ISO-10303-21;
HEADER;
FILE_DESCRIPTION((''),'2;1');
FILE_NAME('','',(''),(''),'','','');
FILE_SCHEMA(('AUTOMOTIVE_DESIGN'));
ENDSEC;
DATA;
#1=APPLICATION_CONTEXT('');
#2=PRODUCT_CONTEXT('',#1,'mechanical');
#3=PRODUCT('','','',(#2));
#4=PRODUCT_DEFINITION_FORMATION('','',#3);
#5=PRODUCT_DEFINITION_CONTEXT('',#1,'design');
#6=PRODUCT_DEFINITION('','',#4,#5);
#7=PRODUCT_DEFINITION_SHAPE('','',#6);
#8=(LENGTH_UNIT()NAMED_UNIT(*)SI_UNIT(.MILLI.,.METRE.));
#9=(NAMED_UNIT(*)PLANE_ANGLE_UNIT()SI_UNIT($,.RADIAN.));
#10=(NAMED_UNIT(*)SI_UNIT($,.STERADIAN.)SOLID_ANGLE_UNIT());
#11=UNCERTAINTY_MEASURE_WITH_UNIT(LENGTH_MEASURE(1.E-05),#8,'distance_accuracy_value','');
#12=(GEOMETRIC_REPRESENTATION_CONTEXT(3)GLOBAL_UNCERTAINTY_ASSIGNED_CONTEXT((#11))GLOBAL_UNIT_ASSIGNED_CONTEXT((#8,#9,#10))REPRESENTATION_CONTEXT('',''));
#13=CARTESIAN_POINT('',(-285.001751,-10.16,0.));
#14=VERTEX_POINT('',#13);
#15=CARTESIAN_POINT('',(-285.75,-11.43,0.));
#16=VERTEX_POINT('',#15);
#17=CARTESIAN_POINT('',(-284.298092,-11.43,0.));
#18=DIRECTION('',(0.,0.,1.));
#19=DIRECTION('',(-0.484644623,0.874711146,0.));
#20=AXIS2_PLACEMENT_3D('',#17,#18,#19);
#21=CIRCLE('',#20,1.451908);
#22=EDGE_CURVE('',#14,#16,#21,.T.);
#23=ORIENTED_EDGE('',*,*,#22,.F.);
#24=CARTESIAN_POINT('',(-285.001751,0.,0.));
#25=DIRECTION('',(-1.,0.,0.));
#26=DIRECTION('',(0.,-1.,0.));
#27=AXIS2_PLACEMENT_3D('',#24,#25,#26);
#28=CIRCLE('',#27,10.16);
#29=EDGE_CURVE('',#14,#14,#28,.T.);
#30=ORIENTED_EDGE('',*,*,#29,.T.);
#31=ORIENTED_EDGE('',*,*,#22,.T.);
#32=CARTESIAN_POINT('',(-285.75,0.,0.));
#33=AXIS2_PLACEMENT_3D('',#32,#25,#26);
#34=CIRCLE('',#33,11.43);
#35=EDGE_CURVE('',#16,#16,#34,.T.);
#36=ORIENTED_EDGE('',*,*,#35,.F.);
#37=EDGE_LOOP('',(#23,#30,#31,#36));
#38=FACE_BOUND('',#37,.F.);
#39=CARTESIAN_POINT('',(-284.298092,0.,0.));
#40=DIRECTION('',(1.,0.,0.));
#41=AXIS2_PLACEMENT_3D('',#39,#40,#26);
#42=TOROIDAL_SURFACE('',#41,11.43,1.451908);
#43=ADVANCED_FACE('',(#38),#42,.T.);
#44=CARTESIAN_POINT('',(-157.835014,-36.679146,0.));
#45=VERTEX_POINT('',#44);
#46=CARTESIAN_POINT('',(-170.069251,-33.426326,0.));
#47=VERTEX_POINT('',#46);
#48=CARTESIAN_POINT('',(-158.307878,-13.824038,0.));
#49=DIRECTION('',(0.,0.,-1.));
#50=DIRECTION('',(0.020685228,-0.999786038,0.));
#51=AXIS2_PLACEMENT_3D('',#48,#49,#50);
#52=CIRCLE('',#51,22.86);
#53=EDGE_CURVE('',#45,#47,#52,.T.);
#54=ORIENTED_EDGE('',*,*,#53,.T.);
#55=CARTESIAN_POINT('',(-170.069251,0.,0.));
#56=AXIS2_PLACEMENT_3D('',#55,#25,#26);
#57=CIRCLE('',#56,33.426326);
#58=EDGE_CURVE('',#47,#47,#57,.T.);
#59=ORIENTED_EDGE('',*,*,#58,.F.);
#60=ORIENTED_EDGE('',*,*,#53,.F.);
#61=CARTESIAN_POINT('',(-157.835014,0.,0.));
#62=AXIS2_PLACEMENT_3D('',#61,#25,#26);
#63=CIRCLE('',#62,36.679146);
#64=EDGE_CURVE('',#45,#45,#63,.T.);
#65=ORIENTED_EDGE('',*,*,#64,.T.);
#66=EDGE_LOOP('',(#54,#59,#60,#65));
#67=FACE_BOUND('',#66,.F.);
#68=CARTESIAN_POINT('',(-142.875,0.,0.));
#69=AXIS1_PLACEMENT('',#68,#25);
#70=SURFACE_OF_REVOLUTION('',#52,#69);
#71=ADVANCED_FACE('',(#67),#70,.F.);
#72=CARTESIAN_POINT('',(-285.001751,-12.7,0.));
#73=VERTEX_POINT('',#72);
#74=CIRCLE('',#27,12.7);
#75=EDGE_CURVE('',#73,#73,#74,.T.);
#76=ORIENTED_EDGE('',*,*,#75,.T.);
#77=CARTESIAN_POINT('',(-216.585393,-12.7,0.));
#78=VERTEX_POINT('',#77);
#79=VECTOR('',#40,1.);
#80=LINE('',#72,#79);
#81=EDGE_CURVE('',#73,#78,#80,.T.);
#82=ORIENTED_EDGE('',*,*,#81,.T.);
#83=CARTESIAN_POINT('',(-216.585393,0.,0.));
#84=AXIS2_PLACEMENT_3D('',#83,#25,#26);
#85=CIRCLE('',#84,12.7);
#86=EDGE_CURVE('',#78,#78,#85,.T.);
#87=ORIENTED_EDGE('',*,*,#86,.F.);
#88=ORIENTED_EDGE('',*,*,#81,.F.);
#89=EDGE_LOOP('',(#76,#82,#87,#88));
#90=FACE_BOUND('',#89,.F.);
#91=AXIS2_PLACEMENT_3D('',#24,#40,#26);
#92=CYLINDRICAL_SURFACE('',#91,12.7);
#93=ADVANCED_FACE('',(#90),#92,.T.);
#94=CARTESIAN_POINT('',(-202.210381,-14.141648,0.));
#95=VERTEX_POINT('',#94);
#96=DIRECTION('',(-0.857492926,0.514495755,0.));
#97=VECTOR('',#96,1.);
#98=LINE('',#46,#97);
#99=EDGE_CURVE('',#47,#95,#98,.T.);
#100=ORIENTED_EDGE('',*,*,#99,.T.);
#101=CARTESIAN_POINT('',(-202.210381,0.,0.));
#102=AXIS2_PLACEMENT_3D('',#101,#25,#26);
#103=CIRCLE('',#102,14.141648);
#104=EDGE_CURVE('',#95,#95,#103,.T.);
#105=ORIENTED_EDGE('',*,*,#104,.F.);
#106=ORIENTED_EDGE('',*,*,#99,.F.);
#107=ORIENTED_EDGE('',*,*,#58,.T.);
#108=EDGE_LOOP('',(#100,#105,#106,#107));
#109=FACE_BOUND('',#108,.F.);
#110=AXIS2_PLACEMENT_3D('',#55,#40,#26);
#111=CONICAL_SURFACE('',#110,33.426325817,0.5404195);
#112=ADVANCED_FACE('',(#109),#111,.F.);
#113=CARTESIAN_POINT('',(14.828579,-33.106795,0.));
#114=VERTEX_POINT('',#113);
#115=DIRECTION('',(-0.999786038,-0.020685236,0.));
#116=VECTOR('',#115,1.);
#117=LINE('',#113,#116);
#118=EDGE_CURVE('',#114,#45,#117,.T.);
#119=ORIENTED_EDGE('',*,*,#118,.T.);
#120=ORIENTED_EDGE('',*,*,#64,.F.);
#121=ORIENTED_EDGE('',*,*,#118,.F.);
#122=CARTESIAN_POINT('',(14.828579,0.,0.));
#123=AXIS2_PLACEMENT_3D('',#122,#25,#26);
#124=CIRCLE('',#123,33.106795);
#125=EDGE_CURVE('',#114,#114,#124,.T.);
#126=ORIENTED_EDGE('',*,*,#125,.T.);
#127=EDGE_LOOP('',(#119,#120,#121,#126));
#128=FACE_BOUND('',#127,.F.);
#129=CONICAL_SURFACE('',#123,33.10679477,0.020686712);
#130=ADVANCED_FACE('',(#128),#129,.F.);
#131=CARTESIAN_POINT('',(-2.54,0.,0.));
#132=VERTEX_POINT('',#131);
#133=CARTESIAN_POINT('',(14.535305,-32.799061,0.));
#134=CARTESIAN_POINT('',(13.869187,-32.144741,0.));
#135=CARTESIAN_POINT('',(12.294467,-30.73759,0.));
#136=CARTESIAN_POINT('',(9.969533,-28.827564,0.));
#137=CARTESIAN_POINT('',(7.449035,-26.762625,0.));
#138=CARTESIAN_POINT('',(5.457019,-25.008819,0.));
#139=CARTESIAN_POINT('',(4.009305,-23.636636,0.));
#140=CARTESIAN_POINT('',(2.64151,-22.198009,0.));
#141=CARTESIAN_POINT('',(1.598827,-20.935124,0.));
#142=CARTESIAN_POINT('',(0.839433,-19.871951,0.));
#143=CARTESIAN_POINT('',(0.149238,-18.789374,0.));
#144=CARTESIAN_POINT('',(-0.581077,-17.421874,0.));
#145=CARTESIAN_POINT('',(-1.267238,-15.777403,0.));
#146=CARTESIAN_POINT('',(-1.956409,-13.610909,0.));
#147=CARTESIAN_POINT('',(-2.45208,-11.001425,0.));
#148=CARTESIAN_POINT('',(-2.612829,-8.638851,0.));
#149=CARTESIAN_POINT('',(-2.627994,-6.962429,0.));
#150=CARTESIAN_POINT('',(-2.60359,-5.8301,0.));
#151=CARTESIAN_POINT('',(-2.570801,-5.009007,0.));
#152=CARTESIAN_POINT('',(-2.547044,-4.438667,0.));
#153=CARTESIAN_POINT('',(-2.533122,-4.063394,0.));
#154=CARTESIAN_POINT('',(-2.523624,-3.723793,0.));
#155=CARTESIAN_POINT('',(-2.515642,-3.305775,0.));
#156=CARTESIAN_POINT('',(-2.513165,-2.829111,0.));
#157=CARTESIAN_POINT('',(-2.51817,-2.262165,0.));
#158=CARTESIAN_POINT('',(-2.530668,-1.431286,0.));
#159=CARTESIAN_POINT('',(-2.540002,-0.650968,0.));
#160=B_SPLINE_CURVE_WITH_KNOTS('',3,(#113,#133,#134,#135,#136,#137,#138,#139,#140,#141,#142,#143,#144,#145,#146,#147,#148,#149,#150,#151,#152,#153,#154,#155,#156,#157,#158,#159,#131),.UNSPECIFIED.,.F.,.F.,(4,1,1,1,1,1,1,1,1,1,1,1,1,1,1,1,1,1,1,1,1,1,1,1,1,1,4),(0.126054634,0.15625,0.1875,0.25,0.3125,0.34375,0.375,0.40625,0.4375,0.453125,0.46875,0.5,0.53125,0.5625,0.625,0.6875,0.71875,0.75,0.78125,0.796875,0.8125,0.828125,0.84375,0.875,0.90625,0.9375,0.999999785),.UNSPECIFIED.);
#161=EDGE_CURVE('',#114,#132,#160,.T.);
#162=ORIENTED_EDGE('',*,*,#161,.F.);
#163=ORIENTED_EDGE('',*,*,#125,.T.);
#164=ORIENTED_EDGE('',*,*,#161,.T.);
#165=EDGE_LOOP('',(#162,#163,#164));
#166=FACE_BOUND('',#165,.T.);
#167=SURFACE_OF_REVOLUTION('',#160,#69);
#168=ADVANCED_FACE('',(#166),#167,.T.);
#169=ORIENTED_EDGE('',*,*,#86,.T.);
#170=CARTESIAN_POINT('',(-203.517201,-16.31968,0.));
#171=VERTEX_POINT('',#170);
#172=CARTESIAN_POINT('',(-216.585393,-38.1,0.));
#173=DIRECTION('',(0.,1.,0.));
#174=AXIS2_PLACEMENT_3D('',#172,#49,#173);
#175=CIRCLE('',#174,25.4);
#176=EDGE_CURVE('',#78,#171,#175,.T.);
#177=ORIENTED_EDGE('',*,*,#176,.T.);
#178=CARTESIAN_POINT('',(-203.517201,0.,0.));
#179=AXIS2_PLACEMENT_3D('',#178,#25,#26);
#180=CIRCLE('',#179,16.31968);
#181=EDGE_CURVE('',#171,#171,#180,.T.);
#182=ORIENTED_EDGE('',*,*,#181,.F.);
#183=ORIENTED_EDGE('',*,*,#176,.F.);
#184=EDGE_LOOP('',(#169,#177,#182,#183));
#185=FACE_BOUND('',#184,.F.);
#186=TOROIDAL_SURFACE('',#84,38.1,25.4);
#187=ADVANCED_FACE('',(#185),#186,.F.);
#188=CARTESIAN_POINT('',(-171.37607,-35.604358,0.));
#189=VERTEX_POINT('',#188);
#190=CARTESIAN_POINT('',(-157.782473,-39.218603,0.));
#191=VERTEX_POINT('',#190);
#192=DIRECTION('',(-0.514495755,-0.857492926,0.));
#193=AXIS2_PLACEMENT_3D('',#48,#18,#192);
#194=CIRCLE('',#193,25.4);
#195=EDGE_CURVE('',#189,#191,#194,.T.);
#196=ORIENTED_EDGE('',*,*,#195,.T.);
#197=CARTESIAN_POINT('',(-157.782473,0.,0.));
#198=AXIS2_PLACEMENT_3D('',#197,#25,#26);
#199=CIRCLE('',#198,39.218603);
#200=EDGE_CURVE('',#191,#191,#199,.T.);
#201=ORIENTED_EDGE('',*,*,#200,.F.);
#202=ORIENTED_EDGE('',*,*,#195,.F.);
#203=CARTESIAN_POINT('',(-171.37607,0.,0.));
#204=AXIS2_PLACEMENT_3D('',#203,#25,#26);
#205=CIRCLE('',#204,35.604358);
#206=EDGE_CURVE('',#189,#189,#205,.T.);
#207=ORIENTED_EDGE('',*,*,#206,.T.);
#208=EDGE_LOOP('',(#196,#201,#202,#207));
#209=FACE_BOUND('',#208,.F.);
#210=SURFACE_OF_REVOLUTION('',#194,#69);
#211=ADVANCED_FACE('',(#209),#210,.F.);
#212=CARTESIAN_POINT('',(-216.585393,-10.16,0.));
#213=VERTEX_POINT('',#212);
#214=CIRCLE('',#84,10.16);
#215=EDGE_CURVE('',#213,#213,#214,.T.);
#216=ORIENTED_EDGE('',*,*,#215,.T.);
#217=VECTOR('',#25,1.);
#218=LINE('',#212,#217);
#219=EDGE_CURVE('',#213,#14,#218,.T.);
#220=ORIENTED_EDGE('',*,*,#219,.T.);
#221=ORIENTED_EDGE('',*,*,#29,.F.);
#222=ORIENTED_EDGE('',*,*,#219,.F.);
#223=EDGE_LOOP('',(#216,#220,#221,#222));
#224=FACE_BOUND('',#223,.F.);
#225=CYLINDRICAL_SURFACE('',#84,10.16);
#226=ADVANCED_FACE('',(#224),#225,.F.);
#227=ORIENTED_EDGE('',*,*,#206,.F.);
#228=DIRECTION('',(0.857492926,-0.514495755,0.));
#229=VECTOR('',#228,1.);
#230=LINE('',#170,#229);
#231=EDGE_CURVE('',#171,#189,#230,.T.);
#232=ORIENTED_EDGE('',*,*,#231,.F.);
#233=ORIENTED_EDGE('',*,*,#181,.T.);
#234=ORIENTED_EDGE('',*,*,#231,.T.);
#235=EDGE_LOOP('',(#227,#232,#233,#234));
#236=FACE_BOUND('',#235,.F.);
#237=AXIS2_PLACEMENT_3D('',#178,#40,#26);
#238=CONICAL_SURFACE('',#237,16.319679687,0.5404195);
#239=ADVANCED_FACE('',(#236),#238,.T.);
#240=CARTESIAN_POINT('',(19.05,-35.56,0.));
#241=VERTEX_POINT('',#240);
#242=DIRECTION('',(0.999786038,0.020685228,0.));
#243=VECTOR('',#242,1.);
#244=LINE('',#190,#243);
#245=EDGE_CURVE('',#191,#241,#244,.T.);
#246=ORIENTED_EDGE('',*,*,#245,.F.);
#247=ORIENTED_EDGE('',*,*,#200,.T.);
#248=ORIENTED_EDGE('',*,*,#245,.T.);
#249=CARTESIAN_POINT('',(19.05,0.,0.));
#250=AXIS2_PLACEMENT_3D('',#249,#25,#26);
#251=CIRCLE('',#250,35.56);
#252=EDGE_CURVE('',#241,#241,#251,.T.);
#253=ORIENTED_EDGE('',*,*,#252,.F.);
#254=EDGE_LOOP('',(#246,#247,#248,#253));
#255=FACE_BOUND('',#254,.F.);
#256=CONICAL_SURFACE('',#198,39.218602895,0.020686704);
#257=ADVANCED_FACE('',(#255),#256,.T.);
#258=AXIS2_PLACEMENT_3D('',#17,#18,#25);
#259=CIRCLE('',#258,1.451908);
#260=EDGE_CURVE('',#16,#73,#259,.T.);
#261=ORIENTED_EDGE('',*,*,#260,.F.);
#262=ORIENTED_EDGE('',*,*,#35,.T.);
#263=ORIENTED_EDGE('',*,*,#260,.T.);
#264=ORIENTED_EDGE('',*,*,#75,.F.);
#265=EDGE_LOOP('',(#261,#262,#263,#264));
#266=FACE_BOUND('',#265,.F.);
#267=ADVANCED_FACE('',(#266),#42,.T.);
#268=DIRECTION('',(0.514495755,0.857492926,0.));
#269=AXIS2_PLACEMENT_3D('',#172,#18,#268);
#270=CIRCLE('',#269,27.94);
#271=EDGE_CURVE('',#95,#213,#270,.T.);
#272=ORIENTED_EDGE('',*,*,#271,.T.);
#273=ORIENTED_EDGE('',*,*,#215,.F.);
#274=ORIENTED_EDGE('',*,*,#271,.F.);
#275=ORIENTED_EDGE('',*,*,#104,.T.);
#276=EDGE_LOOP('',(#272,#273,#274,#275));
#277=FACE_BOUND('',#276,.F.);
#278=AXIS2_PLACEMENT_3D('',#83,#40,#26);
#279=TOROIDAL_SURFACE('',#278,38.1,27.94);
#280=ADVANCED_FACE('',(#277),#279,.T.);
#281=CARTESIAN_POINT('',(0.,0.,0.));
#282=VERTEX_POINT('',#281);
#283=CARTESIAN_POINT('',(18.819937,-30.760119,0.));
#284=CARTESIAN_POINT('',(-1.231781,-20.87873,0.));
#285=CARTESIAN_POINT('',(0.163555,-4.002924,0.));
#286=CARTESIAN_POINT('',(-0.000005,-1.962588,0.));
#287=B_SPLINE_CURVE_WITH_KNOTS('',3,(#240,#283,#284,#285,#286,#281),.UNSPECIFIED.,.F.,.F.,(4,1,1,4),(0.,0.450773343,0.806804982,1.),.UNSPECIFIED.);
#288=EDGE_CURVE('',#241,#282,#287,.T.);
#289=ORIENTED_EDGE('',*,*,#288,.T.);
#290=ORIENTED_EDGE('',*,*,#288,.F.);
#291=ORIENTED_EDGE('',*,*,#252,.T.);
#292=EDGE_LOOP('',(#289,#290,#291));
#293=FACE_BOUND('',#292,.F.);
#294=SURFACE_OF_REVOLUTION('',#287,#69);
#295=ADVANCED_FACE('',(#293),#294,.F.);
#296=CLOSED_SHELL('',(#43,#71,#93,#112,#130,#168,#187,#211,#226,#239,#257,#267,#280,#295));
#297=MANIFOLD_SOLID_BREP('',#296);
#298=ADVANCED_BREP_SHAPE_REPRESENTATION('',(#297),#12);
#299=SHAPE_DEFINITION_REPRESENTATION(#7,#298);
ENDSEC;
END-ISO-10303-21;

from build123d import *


# Not quite as in the source:
# - ends of sketch curves that miss each other by under 0.0002 mm in the source are joined
# - the dataset's text gives a spline's control points without its knots; the knots are read off the source's solid


with BuildPart() as f1:
    # F0 (on Top) → F1 (revolve)
    with BuildSketch(Plane.XY):
        with BuildLine():
            ThreePointArc((-285.75, -11.43), (-285.5490287786, -12.167016937), (-285.0017514707, -12.7))
            Line((-285.0017514707, -12.7), (-216.5853927097, -12.7))
            ThreePointArc((-216.5853927097, -12.7), (-209.8052797295, -13.6216408234), (-203.5172005218, -16.3196796869))
            Line((-203.5172005218, -16.3196796869), (-171.3760702521, -35.6043578488))
            ThreePointArc((-171.3760702521, -35.6043578488), (-164.8344445945, -38.3712151601), (-157.7824732637, -39.2186028951))
            Line((-157.7824732637, -39.2186028951), (19.05, -35.56))
            add(Edge.make_bspline(
                [(19.05, -35.56), (18.8199370568, -30.7601188197), (-1.2317807445, -20.8787296757), (0.1635549587, -4.0029242831), (-5.1918e-06, -1.9625883677), (0, 0)],
                knots=[0, 0, 0, 0, 0.4507733435, 0.8068049822, 1, 1, 1, 1], degree=3))
            Line((0, 0), (-2.54, 0))
            add(Edge.make_bspline(
                [(14.8285794135, -33.1067947702), (14.5353050036, -32.7990607261), (13.8691865137, -32.1447406693), (12.2944674544, -30.73758966), (9.9695334737, -28.8275639769), (7.4490348824, -26.7626250066), (5.4570185152, -25.0088190546), (4.0093053584, -23.6366363216), (2.641510283, -22.1980089148), (1.5988268496, -20.9351240128), (0.8394327936, -19.8719511734), (0.1492382006, -18.7893744625), (-0.5810765462, -17.4218736538), (-1.2672380096, -15.7774032099), (-1.9564088602, -13.6109085126), (-2.4520800573, -11.0014246266), (-2.6128292518, -8.638851289), (-2.627993734, -6.9624293235), (-2.6035900901, -5.8300997647), (-2.5708007223, -5.0090073669), (-2.547044183, -4.4386671163), (-2.5331221367, -4.0633936667), (-2.5236240841, -3.723792553), (-2.5156422476, -3.3057754423), (-2.5131648633, -2.8291110855), (-2.5181696061, -2.2621652533), (-2.530667923, -1.4312861782), (-2.5400016792, -0.6509680927), (-2.54, 0)],
                knots=[0.1260546343, 0.1260546343, 0.1260546343, 0.1260546343, 0.15625, 0.1875, 0.25, 0.3125, 0.34375, 0.375, 0.40625, 0.4375, 0.453125, 0.46875, 0.5, 0.53125, 0.5625, 0.625, 0.6875, 0.71875, 0.75, 0.78125, 0.796875, 0.8125, 0.828125, 0.84375, 0.875, 0.90625, 0.9375, 0.999999785, 0.999999785, 0.999999785, 0.999999785], degree=3))
            Line((14.8285794135, -33.1067947702), (-157.8350137437, -36.6791463592))
            ThreePointArc((-157.8350137437, -36.6791463592), (-164.1817879415, -35.9164973976), (-170.0692510333, -33.4263258174))
            Line((-170.0692510333, -33.4263258174), (-202.210381303, -14.1416476556))
            ThreePointArc((-202.210381303, -14.1416476556), (-209.1272684315, -11.1738049058), (-216.5853927097, -10.16))
            Line((-216.5853927097, -10.16), (-285.0017514707, -10.16))
            ThreePointArc((-285.0017514707, -10.16), (-285.5490287786, -10.692983063), (-285.75, -11.43))
        make_face()
    revolve(axis=Axis((-142.875, 0, 0), (-1, 0, 0)))


solid = f1.part
